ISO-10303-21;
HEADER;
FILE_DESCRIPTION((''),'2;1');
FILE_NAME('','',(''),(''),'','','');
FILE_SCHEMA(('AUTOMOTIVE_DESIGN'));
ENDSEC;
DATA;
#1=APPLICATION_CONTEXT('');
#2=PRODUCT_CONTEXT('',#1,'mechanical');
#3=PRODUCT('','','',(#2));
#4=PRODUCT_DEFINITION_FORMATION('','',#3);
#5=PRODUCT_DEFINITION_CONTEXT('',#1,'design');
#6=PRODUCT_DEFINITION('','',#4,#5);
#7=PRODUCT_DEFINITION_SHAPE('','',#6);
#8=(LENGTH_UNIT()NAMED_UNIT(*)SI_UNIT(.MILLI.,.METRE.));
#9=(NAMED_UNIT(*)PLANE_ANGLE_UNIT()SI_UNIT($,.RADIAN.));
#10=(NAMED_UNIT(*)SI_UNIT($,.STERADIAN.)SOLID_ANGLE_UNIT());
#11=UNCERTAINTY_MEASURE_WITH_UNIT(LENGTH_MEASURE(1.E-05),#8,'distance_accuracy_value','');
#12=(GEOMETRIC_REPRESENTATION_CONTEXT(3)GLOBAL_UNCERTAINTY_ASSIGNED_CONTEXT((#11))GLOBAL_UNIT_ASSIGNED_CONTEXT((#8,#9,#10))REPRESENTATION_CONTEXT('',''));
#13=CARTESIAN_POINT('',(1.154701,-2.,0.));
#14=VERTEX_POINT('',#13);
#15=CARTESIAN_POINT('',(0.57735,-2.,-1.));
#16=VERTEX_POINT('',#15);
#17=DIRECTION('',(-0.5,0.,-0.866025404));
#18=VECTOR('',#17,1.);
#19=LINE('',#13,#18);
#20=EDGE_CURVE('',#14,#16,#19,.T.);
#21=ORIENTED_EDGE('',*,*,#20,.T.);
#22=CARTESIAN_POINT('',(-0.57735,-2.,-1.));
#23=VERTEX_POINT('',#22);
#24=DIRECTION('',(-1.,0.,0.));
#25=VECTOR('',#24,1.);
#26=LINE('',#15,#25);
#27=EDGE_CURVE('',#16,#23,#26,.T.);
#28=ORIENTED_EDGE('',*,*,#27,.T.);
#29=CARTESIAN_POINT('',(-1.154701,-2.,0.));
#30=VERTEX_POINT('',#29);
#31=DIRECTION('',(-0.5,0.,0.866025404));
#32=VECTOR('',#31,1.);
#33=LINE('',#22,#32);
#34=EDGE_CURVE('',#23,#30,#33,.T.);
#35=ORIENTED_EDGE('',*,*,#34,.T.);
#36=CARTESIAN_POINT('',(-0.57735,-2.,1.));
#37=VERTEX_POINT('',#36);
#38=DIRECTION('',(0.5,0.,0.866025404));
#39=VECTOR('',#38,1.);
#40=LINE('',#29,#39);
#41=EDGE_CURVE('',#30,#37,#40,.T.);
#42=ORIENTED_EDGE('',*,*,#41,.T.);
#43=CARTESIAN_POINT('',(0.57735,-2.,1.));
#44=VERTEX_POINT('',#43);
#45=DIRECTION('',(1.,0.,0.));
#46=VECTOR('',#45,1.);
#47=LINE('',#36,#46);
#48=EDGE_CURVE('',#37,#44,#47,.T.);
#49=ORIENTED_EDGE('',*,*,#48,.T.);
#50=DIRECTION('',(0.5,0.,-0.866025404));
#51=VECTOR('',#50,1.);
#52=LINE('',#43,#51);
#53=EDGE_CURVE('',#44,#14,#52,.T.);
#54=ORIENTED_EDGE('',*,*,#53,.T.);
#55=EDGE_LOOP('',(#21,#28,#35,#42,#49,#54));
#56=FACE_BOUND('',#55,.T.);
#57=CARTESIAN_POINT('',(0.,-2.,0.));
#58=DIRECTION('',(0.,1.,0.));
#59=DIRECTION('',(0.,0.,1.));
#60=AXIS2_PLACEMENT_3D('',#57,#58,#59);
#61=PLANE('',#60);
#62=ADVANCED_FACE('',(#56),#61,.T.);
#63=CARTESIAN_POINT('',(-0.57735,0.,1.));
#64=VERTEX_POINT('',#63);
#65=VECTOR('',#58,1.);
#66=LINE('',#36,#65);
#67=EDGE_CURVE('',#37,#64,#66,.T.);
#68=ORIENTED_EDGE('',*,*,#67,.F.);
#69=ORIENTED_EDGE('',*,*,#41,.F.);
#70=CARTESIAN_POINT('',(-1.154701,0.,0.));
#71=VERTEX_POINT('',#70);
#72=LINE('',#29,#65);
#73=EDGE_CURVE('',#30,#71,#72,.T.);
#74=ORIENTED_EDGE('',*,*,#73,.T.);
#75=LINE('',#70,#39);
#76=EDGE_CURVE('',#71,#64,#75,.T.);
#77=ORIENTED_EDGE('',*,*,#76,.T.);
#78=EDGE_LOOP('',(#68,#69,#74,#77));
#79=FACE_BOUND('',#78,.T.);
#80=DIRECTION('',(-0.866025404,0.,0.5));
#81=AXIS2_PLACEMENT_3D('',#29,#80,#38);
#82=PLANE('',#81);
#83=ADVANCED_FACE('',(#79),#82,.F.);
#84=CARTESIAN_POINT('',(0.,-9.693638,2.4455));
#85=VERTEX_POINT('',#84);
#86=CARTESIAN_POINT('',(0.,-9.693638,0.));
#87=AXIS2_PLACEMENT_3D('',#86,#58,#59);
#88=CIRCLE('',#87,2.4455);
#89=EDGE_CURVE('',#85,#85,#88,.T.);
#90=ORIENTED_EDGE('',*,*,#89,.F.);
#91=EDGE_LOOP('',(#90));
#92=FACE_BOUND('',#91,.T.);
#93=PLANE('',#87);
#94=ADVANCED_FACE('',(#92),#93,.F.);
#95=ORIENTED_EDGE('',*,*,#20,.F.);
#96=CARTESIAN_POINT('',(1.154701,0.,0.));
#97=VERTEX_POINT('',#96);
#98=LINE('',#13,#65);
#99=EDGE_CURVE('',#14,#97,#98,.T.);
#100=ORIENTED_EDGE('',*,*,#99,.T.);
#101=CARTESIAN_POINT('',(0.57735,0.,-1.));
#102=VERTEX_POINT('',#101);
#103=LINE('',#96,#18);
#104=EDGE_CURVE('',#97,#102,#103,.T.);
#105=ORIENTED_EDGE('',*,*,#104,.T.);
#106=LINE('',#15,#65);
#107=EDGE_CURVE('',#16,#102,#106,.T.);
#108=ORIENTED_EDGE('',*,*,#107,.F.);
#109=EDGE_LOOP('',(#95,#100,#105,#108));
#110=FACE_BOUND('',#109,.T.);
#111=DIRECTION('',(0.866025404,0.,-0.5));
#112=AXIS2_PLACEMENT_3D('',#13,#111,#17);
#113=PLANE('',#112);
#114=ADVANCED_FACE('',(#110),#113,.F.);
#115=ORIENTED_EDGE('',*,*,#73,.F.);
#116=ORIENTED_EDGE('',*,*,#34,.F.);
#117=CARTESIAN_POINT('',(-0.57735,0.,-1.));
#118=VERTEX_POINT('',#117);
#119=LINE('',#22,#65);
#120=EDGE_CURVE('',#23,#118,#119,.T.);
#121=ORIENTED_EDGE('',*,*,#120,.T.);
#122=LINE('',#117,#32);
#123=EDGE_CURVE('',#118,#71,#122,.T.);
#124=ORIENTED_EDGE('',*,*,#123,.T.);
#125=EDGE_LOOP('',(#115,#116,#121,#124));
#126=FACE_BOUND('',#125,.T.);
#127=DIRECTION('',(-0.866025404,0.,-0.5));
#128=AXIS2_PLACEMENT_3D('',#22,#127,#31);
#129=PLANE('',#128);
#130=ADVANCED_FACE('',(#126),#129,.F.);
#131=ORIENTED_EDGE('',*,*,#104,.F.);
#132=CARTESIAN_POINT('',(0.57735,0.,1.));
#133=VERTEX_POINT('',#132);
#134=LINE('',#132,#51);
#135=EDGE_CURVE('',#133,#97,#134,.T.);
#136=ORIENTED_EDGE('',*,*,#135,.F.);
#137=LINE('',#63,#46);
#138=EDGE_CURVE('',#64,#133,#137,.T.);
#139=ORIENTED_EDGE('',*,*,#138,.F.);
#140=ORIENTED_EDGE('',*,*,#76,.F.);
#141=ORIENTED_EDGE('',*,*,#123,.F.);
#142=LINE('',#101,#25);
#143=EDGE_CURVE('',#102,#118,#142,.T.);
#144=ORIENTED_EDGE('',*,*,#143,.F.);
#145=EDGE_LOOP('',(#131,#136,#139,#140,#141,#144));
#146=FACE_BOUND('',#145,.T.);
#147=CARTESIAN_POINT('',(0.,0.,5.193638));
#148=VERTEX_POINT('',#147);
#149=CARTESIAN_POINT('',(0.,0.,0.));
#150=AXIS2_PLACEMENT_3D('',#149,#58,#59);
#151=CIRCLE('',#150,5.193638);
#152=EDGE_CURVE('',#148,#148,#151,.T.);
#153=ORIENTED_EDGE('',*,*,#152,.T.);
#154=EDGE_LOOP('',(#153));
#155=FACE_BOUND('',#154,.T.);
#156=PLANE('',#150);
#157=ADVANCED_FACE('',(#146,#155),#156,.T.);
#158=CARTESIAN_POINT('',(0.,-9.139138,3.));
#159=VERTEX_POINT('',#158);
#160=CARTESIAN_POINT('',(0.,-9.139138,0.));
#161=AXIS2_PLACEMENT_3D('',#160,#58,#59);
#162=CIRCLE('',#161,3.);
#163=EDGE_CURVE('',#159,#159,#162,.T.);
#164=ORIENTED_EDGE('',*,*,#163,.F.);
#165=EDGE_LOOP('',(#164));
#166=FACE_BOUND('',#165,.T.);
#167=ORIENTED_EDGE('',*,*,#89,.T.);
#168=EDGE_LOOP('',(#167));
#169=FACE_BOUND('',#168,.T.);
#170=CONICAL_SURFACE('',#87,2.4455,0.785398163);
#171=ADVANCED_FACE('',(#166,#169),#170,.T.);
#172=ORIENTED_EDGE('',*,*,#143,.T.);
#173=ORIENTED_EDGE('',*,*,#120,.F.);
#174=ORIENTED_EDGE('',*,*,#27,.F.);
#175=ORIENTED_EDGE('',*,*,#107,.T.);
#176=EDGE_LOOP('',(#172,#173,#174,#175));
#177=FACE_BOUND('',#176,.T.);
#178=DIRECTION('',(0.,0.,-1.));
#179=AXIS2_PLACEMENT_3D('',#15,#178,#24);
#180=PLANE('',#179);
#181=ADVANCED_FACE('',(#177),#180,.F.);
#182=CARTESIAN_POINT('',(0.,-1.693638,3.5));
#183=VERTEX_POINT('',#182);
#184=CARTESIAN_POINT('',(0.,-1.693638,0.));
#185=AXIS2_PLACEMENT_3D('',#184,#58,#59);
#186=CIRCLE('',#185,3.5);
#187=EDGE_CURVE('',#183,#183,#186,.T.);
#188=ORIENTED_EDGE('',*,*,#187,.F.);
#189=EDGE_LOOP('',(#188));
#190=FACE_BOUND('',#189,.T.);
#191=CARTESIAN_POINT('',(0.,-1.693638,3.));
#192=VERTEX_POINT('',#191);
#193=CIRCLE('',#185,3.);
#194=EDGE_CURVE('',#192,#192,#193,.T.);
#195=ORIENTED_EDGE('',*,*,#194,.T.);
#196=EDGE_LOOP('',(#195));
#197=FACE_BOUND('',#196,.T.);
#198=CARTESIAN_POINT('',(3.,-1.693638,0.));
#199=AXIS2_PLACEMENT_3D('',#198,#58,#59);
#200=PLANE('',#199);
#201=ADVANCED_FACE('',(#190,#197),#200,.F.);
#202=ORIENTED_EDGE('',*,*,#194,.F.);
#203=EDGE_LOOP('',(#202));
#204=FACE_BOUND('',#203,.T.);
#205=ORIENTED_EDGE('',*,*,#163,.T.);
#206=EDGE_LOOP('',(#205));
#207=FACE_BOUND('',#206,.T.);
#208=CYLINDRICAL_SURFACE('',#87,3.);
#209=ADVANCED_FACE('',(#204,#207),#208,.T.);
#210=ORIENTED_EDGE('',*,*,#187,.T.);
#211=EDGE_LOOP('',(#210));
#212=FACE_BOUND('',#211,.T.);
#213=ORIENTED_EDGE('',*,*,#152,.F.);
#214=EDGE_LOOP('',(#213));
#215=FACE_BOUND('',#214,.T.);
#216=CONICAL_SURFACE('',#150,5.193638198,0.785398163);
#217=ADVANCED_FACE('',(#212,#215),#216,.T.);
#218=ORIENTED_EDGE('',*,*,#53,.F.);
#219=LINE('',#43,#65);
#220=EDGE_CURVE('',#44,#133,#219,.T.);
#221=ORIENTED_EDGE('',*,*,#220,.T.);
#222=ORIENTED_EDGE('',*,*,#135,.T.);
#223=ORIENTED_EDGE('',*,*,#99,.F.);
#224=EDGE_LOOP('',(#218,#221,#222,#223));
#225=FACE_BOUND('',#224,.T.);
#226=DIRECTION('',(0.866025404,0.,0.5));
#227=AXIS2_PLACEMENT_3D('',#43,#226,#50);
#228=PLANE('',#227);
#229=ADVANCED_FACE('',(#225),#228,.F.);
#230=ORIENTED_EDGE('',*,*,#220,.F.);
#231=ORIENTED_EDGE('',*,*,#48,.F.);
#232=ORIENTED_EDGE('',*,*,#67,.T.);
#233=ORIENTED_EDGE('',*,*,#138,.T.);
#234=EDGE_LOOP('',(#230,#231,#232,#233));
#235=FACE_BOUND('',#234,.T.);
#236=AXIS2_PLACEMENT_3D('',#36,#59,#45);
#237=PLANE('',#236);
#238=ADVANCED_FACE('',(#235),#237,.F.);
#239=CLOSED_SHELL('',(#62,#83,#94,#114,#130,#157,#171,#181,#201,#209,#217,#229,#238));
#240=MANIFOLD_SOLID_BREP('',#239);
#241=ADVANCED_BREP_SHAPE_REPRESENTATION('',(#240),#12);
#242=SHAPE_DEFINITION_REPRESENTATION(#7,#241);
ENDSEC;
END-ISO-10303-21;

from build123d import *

# Parameters (mm, degrees)
SKETCH1_W          = 3.5
SKETCH1_H          = 8
CUT_EXTRUDE1_DEPTH = 2


# Read off the part's stored shape, not the designer's step: M6x1.0 Machine Threads Stud1
with BuildPart() as part:
    # Sketch1 → Revolve1 (revolve)
    with BuildSketch(Plane.XY, mode=Mode.PRIVATE) as revolve1_sk:
        with Locations((1.75, -5.693638198)):
            Rectangle(SKETCH1_W, SKETCH1_H)
        Polygon((5.193638198, 0), (0, 0), (0, -1.693638198), (3.5, -1.693638198), align=None)
    revolve(revolve1_sk.sketch.rotate(Axis((0, 39.805194805, 0), (0, -1, 0)), 90), axis=Axis((0, 39.805194805, 0), (0, -1, 0)))

    # Sketch2 → Cut-Extrude1 (cut)
    with BuildSketch(Plane(origin=(0, 0, 0), x_dir=(1, 0, 0), z_dir=(0, 1, 0))):
        Polygon((0.577350269, -1), (1.154700538, 0), (0.577350269, 1), (-0.577350269, 1), (-1.154700538, 0), (-0.577350269, -1), align=None)
    extrude(amount=-CUT_EXTRUDE1_DEPTH, mode=Mode.SUBTRACT)

    # M6x1.0 Machine Threads Stud1 outline → M6x1.0 Machine Threads Stud1 (revolve, cut)
    with BuildSketch(Plane.XY):
        Polygon((2.4455, -9.693638198), (3.5, -9.693638198), (3.5, -1.693638198), (3, -1.693638198), (3, -9.139138198), align=None)
    revolve(axis=Axis((0, 0, 0), (0, 1, 0)), mode=Mode.SUBTRACT)


solid = part.part
